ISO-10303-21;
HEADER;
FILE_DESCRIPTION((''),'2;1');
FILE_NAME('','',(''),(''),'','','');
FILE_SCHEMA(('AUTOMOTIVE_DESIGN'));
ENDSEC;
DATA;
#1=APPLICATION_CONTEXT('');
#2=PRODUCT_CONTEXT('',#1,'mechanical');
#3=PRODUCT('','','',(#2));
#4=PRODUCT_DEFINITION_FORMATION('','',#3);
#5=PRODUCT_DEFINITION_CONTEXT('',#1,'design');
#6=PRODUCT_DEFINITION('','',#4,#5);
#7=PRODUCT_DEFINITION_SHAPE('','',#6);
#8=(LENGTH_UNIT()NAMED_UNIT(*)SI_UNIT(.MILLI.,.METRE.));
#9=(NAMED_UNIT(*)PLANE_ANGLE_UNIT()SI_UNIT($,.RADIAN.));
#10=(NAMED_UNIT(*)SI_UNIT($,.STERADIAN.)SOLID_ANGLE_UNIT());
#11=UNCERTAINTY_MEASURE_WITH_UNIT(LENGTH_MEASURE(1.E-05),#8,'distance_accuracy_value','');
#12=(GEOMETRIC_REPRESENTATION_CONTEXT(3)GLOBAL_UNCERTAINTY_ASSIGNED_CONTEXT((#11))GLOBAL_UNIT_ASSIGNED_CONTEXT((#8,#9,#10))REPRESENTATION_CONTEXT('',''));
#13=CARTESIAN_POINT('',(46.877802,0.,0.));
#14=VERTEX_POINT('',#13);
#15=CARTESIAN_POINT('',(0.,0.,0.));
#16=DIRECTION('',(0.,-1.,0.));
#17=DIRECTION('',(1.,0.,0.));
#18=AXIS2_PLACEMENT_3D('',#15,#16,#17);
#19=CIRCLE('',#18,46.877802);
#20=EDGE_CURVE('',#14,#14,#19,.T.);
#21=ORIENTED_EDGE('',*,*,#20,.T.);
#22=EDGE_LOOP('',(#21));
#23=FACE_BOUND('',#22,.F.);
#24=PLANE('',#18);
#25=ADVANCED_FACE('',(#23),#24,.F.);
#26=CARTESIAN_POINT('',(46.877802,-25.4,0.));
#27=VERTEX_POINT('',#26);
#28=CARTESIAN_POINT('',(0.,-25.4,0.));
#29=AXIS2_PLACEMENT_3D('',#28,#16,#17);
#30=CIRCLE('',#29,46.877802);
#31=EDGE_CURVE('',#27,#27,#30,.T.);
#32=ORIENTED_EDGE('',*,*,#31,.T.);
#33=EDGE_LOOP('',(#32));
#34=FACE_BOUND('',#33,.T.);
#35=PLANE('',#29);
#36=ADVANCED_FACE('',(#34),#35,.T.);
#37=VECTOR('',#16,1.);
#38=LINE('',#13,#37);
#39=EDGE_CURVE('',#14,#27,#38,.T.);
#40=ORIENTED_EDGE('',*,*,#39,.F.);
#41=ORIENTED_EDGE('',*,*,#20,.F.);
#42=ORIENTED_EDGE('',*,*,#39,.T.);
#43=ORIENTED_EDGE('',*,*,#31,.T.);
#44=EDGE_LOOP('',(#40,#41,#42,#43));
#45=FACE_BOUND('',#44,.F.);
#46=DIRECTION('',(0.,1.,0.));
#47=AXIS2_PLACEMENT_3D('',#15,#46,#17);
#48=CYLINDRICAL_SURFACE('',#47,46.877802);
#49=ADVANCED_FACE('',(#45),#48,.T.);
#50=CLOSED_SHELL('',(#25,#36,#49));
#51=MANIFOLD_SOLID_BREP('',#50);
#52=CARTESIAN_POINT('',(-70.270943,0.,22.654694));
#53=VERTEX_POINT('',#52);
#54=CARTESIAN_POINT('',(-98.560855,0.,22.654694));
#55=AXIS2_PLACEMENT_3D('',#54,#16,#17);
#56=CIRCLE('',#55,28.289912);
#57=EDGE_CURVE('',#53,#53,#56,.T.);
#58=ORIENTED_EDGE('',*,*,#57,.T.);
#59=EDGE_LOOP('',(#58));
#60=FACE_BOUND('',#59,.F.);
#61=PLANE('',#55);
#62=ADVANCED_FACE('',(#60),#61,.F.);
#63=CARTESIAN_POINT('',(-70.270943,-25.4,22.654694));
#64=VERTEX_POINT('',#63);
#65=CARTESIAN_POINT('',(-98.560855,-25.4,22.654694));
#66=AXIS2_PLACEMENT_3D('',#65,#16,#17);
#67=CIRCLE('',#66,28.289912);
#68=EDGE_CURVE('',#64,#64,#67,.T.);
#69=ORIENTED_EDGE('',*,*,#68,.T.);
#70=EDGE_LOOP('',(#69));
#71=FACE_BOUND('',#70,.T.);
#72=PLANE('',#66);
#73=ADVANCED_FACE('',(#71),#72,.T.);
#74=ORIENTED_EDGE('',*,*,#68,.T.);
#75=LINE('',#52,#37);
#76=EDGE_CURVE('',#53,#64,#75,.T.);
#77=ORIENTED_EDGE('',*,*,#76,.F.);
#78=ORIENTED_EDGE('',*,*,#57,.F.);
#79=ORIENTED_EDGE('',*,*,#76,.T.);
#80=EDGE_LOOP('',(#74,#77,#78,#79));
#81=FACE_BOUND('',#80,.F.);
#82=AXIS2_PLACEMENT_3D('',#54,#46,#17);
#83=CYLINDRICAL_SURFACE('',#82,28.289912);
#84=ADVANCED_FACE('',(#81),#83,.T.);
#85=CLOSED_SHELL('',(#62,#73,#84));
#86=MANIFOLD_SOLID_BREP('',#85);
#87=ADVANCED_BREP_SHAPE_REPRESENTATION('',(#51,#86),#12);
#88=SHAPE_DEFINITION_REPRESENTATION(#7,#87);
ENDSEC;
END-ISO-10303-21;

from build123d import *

# Parameters (mm, degrees)
F1_R     = 24.2731402163
F1_R_2   = 7.8379343963
F2_DEPTH = 25.4
F0_R     = 46.8778023243
F4_DEPTH = 25.4
F5_R     = 28.2899115296
F5_R_2   = 20.4147682213
F5_R_3   = 10.0236326285
F6_DEPTH = 25.4


# Not quite as in the source:
# - the program builds the solid bodies; features that only make, move or delete a surface that nothing else refers to are left out


with BuildPart() as f2:
    # F1 (on Front) → F2 (new body)
    with BuildSketch(Plane.XZ):
        Circle(F1_R)
        Circle(F1_R_2, mode=Mode.SUBTRACT)
    extrude(amount=F2_DEPTH)

    # F0 (on Front) → F4 (join)
    with BuildSketch(Plane.XZ):
        Circle(F0_R)
    extrude(amount=F4_DEPTH)


with BuildPart() as f6:
    # F5 (on Front) → F6 (new body)
    with BuildSketch(Plane.XZ):
        with Locations((-98.5608547926, 22.6546935737)):
            Circle(F5_R)
        with Locations((-98.5608547926, 22.6546935737)):
            Circle(F5_R_2, mode=Mode.SUBTRACT)
        with Locations((-98.5608547926, 22.6546935737)):
            Circle(F5_R_2)
        with Locations((-98.5608547926, 22.6546935737)):
            Circle(F5_R_3, mode=Mode.SUBTRACT)
        with Locations((-98.5608547926, 22.6546935737)):
            Circle(F5_R_3)
    extrude(amount=F6_DEPTH)


solid = Compound([f2.part, f6.part])
